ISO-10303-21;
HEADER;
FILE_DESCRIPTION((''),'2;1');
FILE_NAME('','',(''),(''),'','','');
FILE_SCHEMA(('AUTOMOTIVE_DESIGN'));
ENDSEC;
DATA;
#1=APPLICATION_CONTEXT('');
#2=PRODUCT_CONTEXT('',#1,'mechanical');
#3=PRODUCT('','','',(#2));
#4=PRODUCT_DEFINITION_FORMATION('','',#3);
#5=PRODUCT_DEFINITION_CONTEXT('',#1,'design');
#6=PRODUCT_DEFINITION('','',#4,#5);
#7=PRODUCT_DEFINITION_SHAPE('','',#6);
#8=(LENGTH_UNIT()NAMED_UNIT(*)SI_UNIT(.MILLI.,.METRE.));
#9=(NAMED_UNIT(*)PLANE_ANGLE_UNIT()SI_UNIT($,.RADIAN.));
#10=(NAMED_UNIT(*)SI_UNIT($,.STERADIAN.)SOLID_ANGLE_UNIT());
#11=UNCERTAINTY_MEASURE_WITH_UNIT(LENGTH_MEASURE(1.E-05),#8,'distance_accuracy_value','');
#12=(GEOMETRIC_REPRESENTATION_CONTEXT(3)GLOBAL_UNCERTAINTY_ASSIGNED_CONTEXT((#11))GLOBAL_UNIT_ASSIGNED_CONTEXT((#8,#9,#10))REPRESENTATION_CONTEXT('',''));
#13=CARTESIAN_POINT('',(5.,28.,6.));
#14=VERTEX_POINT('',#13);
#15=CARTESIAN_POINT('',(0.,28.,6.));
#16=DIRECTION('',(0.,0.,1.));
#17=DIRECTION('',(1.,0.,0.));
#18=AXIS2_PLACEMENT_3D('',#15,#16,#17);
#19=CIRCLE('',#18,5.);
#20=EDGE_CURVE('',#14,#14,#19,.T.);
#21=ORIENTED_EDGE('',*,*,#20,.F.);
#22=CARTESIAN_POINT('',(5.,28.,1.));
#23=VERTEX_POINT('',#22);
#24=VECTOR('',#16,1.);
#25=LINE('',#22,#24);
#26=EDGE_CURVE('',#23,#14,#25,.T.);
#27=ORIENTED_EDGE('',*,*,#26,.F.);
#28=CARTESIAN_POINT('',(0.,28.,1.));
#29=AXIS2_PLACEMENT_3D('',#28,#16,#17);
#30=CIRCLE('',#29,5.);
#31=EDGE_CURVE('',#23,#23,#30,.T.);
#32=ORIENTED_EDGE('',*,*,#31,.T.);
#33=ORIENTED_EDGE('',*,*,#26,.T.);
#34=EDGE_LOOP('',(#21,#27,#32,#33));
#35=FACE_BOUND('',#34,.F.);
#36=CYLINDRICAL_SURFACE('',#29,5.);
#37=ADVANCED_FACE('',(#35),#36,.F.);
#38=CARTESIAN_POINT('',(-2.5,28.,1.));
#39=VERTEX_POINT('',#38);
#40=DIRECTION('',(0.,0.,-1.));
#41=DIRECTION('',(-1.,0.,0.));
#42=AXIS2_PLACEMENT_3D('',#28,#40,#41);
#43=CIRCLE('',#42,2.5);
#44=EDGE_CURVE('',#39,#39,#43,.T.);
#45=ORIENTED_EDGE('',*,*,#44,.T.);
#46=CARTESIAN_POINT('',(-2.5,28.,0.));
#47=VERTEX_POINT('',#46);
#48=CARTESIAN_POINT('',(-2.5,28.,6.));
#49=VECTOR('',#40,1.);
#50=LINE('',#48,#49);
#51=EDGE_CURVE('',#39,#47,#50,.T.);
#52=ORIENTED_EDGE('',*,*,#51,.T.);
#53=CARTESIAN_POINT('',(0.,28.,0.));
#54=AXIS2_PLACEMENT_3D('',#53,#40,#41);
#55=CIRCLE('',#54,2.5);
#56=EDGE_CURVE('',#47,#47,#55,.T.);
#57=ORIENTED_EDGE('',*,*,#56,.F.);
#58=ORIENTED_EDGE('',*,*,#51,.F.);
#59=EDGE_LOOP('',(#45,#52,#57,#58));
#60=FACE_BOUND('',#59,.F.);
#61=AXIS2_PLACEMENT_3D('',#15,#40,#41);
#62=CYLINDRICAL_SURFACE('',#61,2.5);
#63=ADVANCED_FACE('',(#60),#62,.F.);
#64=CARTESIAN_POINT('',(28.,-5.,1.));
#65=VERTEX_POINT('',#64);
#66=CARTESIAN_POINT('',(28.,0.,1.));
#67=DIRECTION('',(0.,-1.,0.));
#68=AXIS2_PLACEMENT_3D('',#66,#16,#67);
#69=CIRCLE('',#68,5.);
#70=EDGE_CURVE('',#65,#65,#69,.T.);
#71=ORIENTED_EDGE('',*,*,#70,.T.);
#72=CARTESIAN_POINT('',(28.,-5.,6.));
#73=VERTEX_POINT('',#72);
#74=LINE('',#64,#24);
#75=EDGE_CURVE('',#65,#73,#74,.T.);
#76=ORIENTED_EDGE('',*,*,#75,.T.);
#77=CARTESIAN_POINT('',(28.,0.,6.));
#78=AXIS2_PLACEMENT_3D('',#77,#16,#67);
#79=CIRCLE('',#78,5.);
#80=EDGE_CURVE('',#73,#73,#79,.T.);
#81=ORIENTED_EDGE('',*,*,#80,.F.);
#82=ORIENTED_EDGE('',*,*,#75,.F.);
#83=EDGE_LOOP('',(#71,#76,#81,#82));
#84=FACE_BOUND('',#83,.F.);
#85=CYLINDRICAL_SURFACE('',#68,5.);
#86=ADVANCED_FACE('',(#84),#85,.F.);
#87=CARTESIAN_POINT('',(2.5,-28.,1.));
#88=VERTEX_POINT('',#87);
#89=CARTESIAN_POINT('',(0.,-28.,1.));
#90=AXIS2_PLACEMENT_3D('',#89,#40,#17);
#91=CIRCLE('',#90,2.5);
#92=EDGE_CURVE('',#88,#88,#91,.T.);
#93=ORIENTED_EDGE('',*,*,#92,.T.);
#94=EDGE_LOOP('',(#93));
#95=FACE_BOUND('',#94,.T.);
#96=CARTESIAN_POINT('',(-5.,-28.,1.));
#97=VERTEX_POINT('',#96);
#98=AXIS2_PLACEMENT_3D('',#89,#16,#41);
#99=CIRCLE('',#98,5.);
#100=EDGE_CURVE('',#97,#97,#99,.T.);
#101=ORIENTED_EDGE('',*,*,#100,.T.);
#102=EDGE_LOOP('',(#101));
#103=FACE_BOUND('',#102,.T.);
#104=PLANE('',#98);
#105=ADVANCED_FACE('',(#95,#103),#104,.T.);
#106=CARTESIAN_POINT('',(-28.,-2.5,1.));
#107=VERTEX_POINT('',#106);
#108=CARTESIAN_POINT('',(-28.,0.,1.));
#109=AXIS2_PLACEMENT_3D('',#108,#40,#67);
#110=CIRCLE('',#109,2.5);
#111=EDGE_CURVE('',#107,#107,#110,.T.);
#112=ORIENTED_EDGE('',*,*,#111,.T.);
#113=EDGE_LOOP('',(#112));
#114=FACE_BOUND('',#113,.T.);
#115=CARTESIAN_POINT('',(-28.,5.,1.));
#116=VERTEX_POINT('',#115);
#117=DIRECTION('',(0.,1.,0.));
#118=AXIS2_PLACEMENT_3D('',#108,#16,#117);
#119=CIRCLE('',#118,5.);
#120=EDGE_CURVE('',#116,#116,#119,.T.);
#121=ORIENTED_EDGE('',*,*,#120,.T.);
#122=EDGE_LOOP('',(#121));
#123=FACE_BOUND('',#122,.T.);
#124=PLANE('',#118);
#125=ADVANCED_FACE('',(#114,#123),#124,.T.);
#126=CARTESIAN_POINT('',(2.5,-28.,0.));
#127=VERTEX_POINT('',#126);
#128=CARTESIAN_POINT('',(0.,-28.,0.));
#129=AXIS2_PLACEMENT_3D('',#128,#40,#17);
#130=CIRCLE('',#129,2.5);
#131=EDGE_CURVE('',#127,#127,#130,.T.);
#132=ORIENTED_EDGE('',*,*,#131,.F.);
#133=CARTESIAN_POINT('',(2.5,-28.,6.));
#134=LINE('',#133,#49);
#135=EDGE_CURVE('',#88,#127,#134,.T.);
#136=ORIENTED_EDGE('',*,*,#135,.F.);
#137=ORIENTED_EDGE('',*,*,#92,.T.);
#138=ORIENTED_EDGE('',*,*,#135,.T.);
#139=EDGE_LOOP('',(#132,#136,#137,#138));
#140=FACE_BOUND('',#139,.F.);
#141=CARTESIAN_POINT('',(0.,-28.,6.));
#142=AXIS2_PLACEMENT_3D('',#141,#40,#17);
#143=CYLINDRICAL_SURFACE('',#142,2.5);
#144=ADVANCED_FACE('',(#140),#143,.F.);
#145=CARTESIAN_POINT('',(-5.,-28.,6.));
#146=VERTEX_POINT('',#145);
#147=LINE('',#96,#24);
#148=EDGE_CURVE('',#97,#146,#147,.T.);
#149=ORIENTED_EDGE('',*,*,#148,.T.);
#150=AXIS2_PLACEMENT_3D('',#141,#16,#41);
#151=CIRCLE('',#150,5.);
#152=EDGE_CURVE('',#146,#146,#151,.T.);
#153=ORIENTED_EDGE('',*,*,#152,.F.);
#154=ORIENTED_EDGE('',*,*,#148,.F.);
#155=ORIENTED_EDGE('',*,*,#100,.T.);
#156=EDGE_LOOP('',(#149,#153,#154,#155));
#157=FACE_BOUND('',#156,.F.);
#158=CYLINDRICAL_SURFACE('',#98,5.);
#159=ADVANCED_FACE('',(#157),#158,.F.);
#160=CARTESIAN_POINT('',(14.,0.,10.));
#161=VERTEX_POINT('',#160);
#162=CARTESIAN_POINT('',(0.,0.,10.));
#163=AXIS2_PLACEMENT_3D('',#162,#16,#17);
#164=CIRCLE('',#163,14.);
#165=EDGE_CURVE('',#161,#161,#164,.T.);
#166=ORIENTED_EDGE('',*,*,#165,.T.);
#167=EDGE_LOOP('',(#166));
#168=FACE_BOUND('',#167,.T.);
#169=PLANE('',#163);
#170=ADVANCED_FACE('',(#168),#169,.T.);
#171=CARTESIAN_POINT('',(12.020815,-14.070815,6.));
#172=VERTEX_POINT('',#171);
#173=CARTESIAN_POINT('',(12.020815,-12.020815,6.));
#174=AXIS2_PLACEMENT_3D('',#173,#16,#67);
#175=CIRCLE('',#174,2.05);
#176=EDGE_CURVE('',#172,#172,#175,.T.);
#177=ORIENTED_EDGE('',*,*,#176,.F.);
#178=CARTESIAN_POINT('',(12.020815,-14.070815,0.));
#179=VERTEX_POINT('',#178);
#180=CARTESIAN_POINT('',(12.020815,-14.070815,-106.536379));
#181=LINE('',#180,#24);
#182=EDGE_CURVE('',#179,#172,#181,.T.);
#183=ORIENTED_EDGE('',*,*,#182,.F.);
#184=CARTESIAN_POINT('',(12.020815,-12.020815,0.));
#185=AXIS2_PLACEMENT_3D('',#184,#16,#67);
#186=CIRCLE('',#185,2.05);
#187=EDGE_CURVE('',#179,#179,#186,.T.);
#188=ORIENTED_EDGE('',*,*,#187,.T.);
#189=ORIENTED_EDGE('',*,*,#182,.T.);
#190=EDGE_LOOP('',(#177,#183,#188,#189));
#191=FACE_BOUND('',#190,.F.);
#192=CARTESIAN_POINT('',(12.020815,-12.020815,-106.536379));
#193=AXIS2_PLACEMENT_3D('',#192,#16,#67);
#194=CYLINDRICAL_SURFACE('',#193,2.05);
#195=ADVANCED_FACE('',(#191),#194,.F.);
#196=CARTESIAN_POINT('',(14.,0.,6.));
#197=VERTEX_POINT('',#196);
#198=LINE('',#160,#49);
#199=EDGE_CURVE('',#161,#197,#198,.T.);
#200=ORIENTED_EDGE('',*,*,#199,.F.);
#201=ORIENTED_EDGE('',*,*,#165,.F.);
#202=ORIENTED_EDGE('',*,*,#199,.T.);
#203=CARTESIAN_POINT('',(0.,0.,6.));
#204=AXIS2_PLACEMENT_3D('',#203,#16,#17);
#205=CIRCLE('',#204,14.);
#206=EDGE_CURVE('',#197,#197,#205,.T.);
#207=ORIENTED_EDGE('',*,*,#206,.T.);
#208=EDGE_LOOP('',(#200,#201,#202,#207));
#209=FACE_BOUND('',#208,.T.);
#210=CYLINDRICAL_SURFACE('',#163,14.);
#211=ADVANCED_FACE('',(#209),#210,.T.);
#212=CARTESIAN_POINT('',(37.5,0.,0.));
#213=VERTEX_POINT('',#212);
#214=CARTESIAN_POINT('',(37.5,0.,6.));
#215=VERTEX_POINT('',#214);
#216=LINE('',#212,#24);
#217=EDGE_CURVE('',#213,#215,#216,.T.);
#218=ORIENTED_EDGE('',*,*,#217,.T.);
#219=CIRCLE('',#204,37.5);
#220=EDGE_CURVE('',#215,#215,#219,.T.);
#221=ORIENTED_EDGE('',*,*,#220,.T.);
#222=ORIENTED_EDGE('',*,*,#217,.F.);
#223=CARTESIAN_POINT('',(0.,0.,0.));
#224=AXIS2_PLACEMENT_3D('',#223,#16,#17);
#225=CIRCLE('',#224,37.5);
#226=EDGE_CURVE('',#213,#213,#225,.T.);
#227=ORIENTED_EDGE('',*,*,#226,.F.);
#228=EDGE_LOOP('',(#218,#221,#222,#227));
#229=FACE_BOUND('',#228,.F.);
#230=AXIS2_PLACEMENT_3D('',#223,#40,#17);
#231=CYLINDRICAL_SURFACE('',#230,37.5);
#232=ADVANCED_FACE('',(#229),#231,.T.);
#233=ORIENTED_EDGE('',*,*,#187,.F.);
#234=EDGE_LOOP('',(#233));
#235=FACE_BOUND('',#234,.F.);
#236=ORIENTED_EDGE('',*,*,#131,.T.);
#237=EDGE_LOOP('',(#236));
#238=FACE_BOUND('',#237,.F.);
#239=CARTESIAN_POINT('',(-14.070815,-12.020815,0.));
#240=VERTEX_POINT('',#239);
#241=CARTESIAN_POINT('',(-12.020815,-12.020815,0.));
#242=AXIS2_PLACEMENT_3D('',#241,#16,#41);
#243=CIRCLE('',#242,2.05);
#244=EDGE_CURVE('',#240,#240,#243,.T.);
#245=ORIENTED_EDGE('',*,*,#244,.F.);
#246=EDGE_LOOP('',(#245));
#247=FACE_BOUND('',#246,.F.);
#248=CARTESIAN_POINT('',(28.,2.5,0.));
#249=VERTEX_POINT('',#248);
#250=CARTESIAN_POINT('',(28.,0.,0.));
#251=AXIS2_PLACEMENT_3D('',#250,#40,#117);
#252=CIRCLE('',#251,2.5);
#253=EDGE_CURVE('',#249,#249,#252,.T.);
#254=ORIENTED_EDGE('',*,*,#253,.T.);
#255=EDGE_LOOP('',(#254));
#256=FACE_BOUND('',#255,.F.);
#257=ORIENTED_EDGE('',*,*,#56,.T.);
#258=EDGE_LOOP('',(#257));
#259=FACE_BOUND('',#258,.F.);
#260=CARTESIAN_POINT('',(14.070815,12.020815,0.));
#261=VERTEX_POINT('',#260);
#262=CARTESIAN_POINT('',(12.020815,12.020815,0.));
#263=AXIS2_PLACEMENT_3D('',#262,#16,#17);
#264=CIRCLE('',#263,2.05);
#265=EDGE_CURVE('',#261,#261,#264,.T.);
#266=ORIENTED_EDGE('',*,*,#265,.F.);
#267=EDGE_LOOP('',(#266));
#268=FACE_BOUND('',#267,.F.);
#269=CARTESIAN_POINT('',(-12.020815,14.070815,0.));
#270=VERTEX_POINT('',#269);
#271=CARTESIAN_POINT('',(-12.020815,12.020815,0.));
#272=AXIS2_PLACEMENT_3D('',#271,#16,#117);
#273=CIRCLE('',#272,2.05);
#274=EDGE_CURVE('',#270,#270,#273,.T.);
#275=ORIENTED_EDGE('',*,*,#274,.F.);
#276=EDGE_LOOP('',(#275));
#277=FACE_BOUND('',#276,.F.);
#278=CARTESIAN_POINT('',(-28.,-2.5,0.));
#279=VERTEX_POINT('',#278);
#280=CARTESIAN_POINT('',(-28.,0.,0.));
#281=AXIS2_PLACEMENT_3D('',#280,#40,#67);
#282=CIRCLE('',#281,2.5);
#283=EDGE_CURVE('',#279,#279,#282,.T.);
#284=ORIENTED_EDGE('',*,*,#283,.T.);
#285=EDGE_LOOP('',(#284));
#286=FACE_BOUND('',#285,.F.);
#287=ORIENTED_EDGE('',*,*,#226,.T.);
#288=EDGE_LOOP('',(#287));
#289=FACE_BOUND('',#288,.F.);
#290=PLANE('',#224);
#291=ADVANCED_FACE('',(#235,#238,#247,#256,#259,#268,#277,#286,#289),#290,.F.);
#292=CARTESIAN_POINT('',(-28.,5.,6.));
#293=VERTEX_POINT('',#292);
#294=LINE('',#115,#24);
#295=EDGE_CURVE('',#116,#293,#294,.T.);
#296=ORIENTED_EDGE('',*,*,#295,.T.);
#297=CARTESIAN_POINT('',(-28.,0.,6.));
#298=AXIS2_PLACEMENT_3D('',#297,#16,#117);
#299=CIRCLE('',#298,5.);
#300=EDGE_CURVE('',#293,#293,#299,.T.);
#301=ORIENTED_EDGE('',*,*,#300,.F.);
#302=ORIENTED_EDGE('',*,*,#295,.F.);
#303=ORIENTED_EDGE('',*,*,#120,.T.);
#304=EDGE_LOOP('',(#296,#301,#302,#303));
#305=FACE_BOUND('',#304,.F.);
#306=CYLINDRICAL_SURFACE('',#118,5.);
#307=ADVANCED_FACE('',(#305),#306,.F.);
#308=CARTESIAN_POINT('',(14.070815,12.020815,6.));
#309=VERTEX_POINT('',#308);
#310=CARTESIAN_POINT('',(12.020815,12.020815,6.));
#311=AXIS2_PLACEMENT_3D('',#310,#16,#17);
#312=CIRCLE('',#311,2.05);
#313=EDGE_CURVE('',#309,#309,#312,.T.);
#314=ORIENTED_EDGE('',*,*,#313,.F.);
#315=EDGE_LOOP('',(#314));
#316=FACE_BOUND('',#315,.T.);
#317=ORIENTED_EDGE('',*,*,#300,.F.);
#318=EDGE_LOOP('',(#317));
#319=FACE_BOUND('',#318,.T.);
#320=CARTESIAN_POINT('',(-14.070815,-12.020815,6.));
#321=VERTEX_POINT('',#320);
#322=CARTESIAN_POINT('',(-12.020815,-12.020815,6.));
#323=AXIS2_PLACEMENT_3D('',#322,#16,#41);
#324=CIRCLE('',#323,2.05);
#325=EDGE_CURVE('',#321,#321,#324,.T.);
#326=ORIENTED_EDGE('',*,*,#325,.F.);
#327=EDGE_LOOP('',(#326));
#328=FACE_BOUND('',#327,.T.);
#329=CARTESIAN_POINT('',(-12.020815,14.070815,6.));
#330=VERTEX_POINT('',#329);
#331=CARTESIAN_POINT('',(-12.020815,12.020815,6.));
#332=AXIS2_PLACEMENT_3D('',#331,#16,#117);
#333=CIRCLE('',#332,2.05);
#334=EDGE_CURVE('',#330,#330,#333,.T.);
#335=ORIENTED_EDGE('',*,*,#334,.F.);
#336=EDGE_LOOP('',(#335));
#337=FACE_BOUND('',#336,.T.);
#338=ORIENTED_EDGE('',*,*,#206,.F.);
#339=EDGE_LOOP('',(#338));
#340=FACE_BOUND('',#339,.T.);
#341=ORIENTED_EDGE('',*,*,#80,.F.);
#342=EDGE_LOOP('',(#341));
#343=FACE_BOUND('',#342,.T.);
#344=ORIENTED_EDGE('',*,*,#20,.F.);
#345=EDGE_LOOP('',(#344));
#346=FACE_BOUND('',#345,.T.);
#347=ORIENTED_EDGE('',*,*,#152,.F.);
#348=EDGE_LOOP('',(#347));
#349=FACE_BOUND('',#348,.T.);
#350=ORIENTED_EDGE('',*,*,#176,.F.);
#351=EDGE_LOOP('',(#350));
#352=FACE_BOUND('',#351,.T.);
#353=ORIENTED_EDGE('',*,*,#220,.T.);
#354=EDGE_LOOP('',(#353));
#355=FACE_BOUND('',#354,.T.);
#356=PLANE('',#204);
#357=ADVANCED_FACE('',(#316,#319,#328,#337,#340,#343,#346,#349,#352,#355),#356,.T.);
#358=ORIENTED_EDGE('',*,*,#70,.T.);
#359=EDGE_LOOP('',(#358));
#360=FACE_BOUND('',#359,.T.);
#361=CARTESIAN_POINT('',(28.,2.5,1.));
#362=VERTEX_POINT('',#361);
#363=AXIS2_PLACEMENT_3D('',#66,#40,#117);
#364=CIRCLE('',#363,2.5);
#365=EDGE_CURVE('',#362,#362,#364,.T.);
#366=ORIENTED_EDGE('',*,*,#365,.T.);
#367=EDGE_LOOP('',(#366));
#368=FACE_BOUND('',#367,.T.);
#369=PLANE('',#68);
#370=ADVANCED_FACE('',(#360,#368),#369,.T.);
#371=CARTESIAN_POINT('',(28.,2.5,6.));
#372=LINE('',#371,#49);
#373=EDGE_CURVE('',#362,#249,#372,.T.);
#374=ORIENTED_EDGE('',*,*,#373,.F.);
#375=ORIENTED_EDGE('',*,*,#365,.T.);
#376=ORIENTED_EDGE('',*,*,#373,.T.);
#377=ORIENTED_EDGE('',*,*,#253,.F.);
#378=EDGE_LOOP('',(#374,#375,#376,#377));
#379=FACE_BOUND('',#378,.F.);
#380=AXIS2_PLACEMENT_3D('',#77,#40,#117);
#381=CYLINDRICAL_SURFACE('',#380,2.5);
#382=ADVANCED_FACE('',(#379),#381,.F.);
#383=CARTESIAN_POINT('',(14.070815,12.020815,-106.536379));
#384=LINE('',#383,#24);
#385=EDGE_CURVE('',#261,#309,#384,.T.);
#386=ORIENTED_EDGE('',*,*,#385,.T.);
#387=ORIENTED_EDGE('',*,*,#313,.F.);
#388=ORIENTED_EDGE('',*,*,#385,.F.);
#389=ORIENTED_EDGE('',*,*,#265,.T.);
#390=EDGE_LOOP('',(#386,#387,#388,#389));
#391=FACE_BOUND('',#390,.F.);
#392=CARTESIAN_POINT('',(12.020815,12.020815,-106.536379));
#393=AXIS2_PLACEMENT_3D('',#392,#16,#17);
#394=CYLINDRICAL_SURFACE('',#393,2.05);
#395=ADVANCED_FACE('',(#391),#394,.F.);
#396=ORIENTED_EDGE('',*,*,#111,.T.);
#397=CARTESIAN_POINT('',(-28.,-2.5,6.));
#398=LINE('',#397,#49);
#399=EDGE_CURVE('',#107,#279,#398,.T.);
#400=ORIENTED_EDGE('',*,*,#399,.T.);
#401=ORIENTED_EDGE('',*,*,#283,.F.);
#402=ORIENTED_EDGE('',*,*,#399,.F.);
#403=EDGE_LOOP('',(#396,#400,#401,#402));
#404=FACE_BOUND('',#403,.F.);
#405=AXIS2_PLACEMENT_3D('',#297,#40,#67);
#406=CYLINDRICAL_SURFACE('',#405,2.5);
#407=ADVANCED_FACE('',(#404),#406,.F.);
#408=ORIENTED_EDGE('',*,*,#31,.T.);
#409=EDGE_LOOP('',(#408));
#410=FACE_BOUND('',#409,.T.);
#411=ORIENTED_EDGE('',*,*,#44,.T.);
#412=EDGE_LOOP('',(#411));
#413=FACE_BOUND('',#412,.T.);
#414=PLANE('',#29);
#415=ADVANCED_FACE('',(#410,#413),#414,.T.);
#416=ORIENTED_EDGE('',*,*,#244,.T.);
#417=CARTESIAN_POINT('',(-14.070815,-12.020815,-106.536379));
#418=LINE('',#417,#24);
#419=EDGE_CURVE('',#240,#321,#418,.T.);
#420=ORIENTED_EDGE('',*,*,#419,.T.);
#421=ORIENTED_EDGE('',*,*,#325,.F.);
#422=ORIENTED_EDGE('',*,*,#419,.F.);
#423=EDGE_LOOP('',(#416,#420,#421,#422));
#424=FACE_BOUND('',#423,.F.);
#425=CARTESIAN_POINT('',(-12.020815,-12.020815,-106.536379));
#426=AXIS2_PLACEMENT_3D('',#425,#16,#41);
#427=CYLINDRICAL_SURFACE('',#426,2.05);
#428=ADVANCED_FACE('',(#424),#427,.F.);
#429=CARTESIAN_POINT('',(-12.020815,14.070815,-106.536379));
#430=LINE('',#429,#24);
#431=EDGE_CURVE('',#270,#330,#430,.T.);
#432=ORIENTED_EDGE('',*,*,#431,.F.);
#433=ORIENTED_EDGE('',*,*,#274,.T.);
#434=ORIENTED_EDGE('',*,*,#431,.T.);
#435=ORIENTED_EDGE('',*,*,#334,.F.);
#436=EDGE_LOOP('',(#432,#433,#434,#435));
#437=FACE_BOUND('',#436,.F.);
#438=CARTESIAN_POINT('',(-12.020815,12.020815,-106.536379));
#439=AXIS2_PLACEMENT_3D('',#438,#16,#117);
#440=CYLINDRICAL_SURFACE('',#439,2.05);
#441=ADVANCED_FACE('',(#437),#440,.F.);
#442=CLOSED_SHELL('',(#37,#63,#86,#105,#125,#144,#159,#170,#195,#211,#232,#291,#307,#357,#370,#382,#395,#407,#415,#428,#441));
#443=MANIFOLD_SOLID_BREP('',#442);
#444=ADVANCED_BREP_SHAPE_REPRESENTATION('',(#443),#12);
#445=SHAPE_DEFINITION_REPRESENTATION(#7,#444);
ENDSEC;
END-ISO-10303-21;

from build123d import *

# Parameters (mm, degrees)
F0_R            = 37.5
F1_DEPTH        = 10
F2_R            = 37.5
F2_R_2          = 14
F3_DEPTH        = 4
F5_D            = 5
F5_CBORE_D      = 10
F5_CBORE_DEPTH  = 5
F5_COPIES_COUNT = 4
F7_D            = 4.1
F7_COPIES_COUNT = 4


# Not quite as in the source:
# - a pattern or mirror of a feature is missing from the dataset's text; its kind, count and spacing are read off the source's solid
# - a feature names something its author has since deleted; it is built from what else it names


with BuildPart() as f1:
    # F0 (on Top) → F1 (new body)
    with BuildSketch(Plane.XY):
        Circle(F0_R)
    extrude(amount=F1_DEPTH)

    # F2 (on face) → F3 (cut)
    with BuildSketch(Plane.XY.offset(10)):
        Circle(F2_R)
        Circle(F2_R_2, mode=Mode.SUBTRACT)
    extrude(amount=-F3_DEPTH, mode=Mode.SUBTRACT)

    # F5 (through all)
    with Locations(Plane.XY.offset(6)):
        with Locations((0, 28)):
            f5 = CounterBoreHole(F5_D / 2, F5_CBORE_D / 2, F5_CBORE_DEPTH)

    # F5_copies: F5 ×4 about axis
    f5_copies_axis = Axis((0, 0, 0), (0, 0, 1))
    for i in range(1, F5_COPIES_COUNT):
        add(f5.rotate(f5_copies_axis, i * 360 / F5_COPIES_COUNT), mode=Mode.SUBTRACT)

    # F7 (through all)
    with Locations(Plane(origin=(0, 0, 0), x_dir=(1, 0, 0), z_dir=(0, 0, -1))):
        with Locations((-12.0208152802, 12.0208152802)):
            f7 = Hole(F7_D / 2)

    # F7_copies: F7 ×4 about axis
    f7_copies_axis = Axis((0, 0, 0), (0, 0, 1))
    for i in range(1, F7_COPIES_COUNT):
        add(f7.rotate(f7_copies_axis, i * 360 / F7_COPIES_COUNT), mode=Mode.SUBTRACT)


solid = f1.part
